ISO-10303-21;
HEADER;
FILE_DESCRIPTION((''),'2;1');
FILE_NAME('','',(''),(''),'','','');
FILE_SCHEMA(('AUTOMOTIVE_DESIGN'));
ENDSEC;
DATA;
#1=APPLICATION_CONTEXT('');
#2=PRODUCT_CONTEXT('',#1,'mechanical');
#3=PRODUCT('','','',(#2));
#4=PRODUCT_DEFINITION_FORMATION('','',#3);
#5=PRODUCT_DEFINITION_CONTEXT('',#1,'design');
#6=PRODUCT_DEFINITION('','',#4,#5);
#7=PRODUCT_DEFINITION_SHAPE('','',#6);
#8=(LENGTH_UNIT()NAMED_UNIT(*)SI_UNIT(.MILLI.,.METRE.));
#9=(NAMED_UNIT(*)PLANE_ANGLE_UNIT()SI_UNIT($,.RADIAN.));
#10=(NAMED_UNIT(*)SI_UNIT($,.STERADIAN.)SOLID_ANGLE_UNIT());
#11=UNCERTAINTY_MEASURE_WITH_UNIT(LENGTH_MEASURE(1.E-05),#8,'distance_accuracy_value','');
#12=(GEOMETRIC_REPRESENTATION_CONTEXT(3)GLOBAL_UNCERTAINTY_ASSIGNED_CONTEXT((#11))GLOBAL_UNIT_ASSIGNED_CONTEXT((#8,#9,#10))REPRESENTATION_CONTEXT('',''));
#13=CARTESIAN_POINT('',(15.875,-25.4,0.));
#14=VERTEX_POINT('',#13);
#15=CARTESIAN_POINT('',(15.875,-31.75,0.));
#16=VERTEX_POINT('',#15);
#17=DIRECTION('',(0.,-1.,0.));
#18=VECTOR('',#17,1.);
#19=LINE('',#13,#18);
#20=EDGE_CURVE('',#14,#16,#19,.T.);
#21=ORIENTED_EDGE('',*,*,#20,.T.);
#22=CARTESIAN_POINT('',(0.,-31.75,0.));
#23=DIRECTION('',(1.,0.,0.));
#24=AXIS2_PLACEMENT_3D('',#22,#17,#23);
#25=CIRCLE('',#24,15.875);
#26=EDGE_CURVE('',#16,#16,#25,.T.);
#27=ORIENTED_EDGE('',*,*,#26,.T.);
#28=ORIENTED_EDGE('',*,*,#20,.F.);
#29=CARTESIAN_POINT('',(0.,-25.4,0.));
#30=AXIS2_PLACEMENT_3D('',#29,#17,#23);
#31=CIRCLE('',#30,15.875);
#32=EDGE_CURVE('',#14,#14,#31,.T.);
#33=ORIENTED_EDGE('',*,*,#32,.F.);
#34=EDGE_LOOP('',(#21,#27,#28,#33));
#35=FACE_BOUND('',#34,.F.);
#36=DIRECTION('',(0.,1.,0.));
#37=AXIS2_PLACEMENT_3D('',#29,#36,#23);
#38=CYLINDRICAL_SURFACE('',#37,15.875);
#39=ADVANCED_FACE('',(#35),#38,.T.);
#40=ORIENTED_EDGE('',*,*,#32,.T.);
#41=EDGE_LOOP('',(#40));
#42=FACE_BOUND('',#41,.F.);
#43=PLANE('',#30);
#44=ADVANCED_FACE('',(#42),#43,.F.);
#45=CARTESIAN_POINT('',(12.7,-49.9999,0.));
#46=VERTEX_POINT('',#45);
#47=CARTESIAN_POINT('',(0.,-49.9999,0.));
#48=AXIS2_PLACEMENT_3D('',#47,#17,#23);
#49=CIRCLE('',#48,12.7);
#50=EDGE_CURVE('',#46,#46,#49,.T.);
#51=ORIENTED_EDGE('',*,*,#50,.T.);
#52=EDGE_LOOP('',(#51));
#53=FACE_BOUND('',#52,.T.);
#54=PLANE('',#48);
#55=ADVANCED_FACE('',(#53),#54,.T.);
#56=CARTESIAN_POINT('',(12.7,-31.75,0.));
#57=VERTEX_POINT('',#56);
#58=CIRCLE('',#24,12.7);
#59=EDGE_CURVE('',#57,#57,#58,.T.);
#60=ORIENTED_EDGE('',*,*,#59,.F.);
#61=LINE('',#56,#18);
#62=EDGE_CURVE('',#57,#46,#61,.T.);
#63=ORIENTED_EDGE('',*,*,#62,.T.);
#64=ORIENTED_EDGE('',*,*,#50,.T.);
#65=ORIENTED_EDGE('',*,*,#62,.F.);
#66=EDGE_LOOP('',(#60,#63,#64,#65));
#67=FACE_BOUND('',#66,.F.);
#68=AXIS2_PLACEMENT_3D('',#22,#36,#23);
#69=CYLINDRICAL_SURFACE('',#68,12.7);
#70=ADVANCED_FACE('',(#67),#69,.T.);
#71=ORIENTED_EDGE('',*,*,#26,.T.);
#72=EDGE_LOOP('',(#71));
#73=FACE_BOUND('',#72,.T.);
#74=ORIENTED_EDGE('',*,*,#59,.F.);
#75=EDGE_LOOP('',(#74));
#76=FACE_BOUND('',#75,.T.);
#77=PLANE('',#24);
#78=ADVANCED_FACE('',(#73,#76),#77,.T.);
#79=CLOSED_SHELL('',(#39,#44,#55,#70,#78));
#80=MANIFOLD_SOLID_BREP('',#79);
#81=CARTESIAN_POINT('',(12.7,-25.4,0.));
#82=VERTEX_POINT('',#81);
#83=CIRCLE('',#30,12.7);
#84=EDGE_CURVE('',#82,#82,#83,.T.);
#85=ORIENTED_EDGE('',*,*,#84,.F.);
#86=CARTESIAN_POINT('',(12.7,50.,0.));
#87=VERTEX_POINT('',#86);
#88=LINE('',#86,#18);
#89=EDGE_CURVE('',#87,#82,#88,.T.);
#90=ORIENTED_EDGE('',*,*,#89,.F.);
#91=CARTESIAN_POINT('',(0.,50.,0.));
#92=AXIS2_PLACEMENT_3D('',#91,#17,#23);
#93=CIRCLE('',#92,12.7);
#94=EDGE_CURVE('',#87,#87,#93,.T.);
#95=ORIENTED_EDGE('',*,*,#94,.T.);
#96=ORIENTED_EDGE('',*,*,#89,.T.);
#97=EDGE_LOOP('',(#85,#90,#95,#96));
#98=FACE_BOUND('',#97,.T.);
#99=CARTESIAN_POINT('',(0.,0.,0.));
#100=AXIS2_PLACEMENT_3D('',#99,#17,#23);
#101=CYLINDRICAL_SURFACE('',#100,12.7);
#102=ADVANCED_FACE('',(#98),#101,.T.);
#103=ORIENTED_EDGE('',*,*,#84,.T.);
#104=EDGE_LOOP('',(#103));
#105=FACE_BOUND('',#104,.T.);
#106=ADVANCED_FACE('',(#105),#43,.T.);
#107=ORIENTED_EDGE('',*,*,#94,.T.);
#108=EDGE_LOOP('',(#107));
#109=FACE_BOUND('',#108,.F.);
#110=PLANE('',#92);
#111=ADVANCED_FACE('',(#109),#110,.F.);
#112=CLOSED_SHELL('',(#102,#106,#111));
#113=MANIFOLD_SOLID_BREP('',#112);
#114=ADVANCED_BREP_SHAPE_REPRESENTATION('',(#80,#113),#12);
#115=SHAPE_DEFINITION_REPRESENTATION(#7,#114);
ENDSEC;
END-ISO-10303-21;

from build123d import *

# Parameters (mm, degrees)
F0_R     = 12.7
F1_DEPTH = 25.4
F2_R     = 15.875
F2_R_2   = 12.7
F3_DEPTH = 6.35
F4_R     = 12.7
F5_DEPTH = 18.2499
F6_DEPTH = 50


# Not quite as in the source:
# - a feature names something its author has since deleted; it is built from what else it names


with BuildPart() as f1:
    # F0 (on Front) → F1 (new body)
    with BuildSketch(Plane.XZ):
        Circle(F0_R)
    extrude(amount=F1_DEPTH)

    # F6 (add): a face of the model
    f6_faces = [f1.faces().sort_by_distance(p)[0] for p in [
        (0, 0, 0),
    ]]
    extrude(f6_faces, amount=F6_DEPTH)


with BuildPart() as f3:
    # F2 (on face) → F3 (new body)
    with BuildSketch(Plane.XZ.offset(25.4)):
        Circle(F2_R)
        Circle(F2_R_2, mode=Mode.SUBTRACT)
        Circle(F2_R_2)
    extrude(amount=F3_DEPTH)

    # F4 (on face) → F5 (join)
    with BuildSketch(Plane.XZ.offset(31.75)):
        Circle(F4_R)
    extrude(amount=F5_DEPTH)


solid = Compound([f1.part, f3.part])
